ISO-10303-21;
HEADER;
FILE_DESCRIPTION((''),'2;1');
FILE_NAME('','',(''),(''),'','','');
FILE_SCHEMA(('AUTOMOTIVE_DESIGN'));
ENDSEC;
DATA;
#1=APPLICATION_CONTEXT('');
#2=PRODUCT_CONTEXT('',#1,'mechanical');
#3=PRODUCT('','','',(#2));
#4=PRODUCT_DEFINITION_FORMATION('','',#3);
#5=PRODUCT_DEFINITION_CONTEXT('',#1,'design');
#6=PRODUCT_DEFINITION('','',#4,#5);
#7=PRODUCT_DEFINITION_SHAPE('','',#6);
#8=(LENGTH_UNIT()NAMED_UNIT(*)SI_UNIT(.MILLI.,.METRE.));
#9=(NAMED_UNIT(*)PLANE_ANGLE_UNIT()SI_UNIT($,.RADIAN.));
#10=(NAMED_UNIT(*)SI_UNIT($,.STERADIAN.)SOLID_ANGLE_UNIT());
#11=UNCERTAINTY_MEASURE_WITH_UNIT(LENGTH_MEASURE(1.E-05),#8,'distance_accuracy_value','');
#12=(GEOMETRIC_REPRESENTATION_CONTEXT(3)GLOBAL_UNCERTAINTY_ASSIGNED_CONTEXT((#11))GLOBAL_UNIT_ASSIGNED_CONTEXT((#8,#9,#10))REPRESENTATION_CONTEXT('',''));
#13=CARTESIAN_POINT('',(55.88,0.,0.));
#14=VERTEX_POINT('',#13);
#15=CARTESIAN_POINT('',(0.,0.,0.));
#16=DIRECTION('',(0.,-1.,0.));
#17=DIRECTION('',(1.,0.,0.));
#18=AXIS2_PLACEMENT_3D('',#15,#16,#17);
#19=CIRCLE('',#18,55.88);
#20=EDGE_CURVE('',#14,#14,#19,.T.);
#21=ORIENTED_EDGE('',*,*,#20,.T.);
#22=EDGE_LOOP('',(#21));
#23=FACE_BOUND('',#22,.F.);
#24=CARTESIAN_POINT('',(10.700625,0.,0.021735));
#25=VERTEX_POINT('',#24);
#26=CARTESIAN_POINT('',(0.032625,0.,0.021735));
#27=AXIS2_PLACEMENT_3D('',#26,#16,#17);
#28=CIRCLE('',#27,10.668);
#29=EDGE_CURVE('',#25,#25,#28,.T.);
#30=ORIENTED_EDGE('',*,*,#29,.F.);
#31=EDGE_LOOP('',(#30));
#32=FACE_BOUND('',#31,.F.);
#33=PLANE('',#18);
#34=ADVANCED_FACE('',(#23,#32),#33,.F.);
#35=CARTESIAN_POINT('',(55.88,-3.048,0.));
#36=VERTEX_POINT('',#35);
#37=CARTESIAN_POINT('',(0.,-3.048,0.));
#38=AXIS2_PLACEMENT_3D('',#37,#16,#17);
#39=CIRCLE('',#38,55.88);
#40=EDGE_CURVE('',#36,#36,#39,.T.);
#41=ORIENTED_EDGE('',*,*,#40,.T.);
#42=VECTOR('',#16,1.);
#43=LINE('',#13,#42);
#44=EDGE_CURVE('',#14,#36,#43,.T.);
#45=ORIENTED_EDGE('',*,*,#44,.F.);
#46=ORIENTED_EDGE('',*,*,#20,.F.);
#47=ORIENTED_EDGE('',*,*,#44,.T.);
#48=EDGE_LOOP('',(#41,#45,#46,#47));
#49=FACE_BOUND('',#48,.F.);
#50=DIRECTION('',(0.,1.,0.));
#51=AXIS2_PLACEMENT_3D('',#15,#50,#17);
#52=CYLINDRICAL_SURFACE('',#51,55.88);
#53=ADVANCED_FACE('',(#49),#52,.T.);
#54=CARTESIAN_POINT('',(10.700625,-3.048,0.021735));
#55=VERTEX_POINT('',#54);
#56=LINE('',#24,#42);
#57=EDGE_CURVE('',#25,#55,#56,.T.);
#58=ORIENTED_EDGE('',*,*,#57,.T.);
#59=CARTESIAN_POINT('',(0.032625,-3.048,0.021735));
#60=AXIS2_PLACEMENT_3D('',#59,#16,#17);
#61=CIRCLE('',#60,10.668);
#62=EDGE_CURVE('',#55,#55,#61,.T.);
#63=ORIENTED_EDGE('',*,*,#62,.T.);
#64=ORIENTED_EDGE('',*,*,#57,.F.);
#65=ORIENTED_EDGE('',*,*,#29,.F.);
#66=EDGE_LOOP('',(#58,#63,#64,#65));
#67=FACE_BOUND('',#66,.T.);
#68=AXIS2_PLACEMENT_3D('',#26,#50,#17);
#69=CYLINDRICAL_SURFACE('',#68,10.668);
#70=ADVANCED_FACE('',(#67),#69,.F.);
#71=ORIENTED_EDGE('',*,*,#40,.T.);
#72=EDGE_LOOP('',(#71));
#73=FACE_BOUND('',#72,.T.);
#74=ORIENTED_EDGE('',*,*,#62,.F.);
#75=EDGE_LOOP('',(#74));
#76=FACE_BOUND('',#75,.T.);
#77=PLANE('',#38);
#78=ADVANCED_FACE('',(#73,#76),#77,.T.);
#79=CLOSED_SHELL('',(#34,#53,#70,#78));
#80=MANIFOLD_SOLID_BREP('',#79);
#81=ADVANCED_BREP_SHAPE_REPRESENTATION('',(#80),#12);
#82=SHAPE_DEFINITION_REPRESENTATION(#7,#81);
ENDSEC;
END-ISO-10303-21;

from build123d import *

# Parameters (mm, degrees)
F0_R     = 10.668
F1_DEPTH = 3.048


# Not quite as in the source:
# - a feature names something its author has since deleted; it is built from what else it names


with BuildPart() as f1:
    # F0 (on Front) → F1 (new body)
    with BuildSketch(Plane.XZ):
        with BuildLine():
            ThreePointArc((-40.259899137, 38.7519666788), (-20.8908022371, -51.8280694401), (55.88, 0))
            ThreePointArc((55.88, 0), (51.824470852, 20.8997277713), (40.2465490009, 38.7658315211))
            ThreePointArc((40.2465490009, 38.7658315211), (-0.0096236685, 55.8799991713), (-40.259899137, 38.7519666788))
        make_face()
        with Locations((0.0326246152, 0.0217348816)):
            Circle(F0_R, mode=Mode.SUBTRACT)
    extrude(amount=F1_DEPTH)


solid = f1.part
